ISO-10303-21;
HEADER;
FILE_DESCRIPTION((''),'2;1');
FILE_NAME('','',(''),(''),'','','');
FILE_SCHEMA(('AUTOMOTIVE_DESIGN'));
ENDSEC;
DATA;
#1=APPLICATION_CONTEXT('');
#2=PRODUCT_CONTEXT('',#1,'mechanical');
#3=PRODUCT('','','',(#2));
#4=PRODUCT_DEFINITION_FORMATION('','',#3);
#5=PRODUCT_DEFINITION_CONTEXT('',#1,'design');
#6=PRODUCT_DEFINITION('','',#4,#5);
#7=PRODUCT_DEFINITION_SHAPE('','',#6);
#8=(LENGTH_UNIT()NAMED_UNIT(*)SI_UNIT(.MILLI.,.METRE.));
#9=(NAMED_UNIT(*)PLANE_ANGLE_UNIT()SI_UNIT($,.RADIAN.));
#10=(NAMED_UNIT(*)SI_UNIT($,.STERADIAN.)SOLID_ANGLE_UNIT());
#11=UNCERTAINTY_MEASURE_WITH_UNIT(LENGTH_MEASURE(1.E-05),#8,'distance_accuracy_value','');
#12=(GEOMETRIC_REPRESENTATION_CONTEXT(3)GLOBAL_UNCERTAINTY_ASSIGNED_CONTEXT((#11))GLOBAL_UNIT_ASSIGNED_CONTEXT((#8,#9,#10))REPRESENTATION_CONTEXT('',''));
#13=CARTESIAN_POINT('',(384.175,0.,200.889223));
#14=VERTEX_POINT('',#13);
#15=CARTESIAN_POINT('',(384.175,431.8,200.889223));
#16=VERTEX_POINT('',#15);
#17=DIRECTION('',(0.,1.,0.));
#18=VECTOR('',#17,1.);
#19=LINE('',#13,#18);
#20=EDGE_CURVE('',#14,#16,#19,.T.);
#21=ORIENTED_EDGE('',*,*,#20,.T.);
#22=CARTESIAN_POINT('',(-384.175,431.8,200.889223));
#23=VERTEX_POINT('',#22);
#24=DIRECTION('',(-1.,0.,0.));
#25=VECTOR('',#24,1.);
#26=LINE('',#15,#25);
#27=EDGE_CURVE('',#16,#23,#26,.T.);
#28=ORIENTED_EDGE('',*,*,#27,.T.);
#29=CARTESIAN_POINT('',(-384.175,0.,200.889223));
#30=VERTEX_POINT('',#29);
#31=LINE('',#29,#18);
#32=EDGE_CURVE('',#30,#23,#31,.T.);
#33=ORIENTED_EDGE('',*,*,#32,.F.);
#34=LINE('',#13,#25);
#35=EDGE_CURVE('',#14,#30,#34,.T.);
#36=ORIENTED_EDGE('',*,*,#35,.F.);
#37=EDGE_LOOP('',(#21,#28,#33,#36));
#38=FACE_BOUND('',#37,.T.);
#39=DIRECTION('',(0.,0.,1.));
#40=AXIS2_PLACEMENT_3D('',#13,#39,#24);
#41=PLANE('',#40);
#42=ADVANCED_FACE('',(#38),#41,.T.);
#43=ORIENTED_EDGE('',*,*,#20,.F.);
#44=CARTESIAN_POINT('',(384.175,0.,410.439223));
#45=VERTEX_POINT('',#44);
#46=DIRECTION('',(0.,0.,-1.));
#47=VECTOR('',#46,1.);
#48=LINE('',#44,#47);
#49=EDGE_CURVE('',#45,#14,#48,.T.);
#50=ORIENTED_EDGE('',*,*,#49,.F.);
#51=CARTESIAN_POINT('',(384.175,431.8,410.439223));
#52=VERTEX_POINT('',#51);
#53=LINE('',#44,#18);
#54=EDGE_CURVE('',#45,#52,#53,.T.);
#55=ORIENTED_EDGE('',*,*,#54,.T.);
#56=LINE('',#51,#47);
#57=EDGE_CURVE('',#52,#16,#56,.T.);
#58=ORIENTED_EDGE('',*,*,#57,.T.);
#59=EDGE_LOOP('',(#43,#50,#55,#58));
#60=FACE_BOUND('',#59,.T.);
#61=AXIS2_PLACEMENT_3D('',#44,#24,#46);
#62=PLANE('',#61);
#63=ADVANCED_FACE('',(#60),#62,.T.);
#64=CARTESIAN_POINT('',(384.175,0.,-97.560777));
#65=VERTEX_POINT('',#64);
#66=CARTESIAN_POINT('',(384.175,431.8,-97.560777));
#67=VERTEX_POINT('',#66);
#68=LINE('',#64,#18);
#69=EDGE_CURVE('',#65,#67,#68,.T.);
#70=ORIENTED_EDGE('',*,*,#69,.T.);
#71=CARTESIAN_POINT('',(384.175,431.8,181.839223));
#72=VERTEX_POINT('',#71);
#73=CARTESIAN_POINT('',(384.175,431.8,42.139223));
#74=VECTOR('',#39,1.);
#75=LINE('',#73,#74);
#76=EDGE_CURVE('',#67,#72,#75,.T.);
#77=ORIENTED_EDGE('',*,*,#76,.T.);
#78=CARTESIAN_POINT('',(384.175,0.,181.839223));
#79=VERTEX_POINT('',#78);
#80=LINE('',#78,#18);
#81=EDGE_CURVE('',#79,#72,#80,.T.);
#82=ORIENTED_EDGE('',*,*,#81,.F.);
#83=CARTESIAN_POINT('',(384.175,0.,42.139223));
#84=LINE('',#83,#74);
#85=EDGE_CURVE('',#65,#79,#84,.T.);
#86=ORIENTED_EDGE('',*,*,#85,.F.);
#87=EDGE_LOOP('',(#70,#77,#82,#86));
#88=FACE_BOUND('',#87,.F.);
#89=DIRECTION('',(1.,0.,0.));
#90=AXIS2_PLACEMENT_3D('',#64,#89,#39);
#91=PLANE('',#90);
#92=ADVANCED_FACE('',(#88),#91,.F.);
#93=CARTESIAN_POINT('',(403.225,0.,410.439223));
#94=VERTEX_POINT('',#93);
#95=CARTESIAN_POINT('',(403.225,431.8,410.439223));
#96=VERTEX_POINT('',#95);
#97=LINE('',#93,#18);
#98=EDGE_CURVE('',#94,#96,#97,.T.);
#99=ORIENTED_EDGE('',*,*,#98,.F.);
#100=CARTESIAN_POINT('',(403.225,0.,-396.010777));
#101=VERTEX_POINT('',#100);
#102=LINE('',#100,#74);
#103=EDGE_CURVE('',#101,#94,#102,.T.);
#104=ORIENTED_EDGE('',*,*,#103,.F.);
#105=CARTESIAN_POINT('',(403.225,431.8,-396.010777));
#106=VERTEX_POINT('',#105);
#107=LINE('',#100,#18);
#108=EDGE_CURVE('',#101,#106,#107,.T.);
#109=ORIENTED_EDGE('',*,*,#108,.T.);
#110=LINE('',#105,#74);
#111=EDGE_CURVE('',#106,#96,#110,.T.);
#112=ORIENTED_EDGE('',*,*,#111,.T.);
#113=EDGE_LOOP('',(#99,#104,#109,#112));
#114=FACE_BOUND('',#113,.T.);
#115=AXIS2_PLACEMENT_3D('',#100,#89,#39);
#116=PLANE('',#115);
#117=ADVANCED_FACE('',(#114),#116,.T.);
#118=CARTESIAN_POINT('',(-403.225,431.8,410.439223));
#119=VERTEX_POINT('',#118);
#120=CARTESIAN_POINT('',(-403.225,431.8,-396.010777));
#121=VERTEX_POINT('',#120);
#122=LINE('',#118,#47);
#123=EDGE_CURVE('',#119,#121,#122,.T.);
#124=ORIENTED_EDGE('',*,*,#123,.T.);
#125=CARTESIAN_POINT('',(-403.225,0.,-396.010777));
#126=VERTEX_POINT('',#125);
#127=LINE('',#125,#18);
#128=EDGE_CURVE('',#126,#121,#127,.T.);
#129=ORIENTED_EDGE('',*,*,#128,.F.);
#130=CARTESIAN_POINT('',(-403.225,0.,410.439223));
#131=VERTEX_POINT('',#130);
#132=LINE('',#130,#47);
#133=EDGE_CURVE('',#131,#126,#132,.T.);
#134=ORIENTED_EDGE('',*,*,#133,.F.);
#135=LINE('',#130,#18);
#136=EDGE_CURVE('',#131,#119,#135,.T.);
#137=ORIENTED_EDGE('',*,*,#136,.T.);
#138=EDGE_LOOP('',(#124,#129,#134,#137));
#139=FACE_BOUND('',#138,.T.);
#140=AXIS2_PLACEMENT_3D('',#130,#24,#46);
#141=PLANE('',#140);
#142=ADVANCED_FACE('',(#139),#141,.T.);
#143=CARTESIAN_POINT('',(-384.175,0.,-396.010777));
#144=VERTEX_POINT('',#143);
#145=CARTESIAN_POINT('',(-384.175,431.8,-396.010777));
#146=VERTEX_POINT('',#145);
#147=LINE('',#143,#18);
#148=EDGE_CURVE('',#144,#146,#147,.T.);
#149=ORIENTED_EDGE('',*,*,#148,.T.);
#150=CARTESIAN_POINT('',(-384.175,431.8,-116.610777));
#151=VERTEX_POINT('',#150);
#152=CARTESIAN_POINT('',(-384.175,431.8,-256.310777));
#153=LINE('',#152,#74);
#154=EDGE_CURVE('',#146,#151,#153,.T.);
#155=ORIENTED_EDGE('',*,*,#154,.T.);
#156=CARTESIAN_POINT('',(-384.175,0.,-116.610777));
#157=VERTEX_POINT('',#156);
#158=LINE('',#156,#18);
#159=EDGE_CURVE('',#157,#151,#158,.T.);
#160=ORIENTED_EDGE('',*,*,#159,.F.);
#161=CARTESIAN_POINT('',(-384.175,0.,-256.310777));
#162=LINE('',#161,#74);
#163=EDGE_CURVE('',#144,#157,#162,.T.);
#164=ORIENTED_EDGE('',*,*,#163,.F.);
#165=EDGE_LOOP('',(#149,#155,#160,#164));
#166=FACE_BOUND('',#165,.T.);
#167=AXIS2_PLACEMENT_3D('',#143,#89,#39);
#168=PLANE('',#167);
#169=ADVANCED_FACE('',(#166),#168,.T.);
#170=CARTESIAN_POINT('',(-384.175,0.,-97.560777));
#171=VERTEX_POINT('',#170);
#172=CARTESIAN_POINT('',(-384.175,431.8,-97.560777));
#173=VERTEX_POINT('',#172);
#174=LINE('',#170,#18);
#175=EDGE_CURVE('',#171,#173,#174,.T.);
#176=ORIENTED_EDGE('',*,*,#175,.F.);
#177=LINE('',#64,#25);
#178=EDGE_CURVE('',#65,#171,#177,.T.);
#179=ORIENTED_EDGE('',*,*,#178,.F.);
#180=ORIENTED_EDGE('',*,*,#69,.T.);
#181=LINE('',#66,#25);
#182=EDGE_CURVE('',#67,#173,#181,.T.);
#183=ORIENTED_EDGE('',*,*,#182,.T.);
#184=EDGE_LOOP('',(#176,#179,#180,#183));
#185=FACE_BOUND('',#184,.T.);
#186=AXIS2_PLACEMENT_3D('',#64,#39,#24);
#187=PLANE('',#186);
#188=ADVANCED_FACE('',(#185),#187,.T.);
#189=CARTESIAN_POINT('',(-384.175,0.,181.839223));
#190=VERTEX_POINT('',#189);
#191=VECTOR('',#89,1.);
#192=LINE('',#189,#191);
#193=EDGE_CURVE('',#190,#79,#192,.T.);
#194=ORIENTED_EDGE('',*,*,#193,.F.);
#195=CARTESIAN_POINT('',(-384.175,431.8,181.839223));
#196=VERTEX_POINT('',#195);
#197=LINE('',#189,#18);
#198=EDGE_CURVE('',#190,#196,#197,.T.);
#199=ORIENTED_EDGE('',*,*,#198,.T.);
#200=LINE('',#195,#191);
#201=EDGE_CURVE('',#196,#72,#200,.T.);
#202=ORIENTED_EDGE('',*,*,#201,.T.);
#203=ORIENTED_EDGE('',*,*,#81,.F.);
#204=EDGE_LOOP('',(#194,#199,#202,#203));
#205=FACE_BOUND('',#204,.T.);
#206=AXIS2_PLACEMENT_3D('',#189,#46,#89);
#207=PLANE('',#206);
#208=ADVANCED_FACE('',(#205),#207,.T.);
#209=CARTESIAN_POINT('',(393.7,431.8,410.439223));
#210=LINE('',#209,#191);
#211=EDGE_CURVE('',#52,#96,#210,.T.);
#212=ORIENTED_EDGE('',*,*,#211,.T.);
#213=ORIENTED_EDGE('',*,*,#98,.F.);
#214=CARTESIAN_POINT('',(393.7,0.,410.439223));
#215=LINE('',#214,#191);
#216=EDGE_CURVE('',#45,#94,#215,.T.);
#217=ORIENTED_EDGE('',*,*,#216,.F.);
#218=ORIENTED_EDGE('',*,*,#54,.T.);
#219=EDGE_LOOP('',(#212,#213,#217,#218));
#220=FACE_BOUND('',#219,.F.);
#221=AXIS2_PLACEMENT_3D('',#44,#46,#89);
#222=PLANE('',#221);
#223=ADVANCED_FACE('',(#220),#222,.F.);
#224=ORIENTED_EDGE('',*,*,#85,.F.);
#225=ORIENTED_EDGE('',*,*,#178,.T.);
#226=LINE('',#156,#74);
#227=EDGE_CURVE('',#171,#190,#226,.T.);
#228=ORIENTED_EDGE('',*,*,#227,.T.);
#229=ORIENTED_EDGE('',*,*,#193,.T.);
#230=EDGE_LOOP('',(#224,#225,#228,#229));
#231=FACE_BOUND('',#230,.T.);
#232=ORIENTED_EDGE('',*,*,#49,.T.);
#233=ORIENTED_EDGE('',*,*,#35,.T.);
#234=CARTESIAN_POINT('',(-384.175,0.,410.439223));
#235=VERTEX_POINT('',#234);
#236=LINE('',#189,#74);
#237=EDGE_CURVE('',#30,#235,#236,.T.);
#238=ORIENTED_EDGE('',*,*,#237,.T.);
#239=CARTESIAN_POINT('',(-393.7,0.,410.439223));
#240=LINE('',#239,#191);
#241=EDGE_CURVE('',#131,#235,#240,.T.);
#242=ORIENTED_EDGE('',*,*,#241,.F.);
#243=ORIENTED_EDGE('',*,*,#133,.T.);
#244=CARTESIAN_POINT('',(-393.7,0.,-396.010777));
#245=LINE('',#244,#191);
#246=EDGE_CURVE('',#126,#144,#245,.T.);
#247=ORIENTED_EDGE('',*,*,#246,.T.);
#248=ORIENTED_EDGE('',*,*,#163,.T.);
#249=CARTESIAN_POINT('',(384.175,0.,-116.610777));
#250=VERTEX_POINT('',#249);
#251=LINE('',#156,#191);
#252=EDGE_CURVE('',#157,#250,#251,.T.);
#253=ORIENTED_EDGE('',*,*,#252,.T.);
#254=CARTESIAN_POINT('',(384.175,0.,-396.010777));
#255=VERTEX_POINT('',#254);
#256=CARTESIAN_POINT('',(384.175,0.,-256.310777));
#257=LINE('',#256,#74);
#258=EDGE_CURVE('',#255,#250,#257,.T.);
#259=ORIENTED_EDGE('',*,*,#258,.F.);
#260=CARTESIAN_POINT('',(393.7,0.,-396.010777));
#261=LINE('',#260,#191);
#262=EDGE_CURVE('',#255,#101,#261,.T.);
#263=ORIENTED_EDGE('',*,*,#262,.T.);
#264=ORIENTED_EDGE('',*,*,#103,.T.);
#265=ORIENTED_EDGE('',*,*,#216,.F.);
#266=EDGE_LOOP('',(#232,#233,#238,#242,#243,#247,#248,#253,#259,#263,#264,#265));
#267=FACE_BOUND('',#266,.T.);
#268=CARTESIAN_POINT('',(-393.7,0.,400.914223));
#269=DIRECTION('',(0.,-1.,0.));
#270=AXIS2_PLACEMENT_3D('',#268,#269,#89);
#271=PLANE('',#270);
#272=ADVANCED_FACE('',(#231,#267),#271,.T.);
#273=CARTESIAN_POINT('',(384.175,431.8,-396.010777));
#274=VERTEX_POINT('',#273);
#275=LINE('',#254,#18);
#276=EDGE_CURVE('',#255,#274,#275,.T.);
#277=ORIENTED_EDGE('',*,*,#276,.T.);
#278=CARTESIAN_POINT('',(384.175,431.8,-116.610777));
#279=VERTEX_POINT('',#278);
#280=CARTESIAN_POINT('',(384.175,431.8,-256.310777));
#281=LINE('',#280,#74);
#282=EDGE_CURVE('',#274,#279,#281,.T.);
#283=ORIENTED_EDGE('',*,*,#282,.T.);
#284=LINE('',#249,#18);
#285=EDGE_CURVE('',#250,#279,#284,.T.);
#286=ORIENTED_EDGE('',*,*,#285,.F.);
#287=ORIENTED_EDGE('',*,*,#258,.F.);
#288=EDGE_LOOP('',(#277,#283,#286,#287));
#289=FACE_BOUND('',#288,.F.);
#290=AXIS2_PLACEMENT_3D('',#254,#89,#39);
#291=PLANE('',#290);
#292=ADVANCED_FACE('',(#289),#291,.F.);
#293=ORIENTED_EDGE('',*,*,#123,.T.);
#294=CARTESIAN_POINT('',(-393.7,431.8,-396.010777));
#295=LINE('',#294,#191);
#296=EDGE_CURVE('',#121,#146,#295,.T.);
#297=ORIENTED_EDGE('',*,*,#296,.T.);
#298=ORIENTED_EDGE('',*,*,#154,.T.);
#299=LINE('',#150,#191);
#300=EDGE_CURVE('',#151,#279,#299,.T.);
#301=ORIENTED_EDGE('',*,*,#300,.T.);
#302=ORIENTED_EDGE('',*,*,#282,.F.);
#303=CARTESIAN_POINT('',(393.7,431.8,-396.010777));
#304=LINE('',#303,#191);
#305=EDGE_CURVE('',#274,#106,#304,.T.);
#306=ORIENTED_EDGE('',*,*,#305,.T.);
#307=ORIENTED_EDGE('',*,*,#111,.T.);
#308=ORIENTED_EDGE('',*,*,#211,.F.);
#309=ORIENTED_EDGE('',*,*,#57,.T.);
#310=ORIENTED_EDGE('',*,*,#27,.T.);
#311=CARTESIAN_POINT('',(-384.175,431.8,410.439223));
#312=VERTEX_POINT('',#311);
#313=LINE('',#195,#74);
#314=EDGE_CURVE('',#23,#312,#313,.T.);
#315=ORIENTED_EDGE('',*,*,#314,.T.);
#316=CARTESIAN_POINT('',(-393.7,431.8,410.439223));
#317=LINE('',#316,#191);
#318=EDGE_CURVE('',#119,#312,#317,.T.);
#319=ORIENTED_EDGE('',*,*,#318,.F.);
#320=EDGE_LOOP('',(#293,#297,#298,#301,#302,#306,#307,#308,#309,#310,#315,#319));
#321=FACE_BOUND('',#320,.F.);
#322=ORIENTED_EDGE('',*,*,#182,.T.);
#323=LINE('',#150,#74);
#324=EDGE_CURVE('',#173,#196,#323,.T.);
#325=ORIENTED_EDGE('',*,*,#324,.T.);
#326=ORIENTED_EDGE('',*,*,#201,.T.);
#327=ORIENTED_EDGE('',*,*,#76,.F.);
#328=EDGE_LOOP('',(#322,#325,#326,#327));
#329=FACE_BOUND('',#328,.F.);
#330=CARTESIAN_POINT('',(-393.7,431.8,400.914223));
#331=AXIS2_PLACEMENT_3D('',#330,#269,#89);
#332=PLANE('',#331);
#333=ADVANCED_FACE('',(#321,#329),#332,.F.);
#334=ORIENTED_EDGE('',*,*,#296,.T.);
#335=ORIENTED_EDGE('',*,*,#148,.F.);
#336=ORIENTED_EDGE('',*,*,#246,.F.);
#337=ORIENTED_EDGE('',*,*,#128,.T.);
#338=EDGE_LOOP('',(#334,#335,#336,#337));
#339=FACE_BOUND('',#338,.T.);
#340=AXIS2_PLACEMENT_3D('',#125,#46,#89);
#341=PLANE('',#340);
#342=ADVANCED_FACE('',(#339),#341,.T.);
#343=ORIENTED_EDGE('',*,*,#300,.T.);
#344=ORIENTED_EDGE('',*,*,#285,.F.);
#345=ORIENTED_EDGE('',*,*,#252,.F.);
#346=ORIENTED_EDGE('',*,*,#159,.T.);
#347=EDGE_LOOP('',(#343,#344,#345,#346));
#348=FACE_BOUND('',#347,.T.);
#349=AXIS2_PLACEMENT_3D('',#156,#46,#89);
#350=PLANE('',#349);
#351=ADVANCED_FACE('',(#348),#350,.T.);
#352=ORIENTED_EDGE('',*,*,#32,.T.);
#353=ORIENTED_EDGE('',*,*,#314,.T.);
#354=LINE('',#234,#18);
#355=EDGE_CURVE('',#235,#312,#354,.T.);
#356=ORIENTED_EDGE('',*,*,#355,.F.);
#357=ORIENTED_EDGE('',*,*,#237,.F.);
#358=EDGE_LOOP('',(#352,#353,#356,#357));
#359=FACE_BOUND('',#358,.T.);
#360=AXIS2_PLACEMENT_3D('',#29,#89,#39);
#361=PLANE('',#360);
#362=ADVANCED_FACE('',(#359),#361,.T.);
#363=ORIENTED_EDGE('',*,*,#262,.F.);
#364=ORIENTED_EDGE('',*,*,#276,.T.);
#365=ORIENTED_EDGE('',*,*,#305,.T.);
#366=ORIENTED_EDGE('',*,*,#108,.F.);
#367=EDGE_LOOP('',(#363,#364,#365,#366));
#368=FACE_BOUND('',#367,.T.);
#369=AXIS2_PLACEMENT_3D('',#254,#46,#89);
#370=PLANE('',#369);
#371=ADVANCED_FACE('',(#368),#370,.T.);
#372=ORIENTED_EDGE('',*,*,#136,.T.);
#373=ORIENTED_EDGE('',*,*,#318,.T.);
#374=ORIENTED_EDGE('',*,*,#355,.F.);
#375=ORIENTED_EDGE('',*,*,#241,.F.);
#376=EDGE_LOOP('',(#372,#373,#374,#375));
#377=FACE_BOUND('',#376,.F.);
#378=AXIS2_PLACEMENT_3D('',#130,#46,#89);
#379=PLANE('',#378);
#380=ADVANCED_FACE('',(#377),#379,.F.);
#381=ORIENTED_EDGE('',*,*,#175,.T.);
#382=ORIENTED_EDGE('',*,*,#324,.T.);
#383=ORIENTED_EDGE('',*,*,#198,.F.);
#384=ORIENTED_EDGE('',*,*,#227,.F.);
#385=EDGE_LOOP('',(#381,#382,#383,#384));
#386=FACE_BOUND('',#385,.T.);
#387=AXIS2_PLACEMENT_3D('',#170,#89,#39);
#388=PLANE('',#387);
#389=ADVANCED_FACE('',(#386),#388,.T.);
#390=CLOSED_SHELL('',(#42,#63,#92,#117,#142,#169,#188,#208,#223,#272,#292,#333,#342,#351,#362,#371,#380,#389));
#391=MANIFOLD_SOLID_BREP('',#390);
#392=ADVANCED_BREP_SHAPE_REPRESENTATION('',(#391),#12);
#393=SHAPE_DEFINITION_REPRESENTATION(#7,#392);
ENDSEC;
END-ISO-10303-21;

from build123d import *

# Parameters (mm, degrees)
F0_W     = 19.05
F0_H     = 19.05
F0_H_2   = 190.5
F0_H_3   = 279.4
F1_DEPTH = 431.8


with BuildPart() as f1:
    # F0 (on Front) → F1 (new body)
    with BuildSketch(Plane.XZ):
        with Locations((-393.7, 400.9142230511)):
            Rectangle(F0_W, F0_H)
        with Locations((-393.7, 296.1392230511)):
            Rectangle(F0_W, F0_H_2)
        with Locations((393.7, 400.9142230511)):
            Rectangle(F0_W, F0_H)
        with Locations((-393.7, 191.3642230511)):
            Rectangle(F0_W, F0_H)
        with Locations((393.7, 296.1392230511)):
            Rectangle(F0_W, F0_H_2)
        Polygon((-162.0973050594, 200.8892230511), (-384.175, 200.8892230511), (-384.175, 181.8392230511), (-162.0973050594, 181.8392230511), (384.175, 181.8392230511), (384.175, 200.8892230511), align=None)
        with Locations((-393.7, 42.1392230511)):
            Rectangle(F0_W, F0_H_3)
        with Locations((393.7, 191.3642230511)):
            Rectangle(F0_W, F0_H)
        with Locations((-393.7, -107.0857769489)):
            Rectangle(F0_W, F0_H)
        with Locations((393.7, 42.1392230511)):
            Rectangle(F0_W, F0_H_3)
        Polygon((-162.0973050594, -97.5607769489), (-384.175, -97.5607769489), (-384.175, -116.6107769489), (-162.0973050594, -116.6107769489), (384.175, -116.6107769489), (384.175, -97.5607769489), align=None)
        with Locations((-393.7, -256.3107769489)):
            Rectangle(F0_W, F0_H_3)
        with Locations((393.7, -107.0857769489)):
            Rectangle(F0_W, F0_H)
        with Locations((393.7, -256.3107769489)):
            Rectangle(F0_W, F0_H_3)
    extrude(amount=-F1_DEPTH)


solid = f1.part
